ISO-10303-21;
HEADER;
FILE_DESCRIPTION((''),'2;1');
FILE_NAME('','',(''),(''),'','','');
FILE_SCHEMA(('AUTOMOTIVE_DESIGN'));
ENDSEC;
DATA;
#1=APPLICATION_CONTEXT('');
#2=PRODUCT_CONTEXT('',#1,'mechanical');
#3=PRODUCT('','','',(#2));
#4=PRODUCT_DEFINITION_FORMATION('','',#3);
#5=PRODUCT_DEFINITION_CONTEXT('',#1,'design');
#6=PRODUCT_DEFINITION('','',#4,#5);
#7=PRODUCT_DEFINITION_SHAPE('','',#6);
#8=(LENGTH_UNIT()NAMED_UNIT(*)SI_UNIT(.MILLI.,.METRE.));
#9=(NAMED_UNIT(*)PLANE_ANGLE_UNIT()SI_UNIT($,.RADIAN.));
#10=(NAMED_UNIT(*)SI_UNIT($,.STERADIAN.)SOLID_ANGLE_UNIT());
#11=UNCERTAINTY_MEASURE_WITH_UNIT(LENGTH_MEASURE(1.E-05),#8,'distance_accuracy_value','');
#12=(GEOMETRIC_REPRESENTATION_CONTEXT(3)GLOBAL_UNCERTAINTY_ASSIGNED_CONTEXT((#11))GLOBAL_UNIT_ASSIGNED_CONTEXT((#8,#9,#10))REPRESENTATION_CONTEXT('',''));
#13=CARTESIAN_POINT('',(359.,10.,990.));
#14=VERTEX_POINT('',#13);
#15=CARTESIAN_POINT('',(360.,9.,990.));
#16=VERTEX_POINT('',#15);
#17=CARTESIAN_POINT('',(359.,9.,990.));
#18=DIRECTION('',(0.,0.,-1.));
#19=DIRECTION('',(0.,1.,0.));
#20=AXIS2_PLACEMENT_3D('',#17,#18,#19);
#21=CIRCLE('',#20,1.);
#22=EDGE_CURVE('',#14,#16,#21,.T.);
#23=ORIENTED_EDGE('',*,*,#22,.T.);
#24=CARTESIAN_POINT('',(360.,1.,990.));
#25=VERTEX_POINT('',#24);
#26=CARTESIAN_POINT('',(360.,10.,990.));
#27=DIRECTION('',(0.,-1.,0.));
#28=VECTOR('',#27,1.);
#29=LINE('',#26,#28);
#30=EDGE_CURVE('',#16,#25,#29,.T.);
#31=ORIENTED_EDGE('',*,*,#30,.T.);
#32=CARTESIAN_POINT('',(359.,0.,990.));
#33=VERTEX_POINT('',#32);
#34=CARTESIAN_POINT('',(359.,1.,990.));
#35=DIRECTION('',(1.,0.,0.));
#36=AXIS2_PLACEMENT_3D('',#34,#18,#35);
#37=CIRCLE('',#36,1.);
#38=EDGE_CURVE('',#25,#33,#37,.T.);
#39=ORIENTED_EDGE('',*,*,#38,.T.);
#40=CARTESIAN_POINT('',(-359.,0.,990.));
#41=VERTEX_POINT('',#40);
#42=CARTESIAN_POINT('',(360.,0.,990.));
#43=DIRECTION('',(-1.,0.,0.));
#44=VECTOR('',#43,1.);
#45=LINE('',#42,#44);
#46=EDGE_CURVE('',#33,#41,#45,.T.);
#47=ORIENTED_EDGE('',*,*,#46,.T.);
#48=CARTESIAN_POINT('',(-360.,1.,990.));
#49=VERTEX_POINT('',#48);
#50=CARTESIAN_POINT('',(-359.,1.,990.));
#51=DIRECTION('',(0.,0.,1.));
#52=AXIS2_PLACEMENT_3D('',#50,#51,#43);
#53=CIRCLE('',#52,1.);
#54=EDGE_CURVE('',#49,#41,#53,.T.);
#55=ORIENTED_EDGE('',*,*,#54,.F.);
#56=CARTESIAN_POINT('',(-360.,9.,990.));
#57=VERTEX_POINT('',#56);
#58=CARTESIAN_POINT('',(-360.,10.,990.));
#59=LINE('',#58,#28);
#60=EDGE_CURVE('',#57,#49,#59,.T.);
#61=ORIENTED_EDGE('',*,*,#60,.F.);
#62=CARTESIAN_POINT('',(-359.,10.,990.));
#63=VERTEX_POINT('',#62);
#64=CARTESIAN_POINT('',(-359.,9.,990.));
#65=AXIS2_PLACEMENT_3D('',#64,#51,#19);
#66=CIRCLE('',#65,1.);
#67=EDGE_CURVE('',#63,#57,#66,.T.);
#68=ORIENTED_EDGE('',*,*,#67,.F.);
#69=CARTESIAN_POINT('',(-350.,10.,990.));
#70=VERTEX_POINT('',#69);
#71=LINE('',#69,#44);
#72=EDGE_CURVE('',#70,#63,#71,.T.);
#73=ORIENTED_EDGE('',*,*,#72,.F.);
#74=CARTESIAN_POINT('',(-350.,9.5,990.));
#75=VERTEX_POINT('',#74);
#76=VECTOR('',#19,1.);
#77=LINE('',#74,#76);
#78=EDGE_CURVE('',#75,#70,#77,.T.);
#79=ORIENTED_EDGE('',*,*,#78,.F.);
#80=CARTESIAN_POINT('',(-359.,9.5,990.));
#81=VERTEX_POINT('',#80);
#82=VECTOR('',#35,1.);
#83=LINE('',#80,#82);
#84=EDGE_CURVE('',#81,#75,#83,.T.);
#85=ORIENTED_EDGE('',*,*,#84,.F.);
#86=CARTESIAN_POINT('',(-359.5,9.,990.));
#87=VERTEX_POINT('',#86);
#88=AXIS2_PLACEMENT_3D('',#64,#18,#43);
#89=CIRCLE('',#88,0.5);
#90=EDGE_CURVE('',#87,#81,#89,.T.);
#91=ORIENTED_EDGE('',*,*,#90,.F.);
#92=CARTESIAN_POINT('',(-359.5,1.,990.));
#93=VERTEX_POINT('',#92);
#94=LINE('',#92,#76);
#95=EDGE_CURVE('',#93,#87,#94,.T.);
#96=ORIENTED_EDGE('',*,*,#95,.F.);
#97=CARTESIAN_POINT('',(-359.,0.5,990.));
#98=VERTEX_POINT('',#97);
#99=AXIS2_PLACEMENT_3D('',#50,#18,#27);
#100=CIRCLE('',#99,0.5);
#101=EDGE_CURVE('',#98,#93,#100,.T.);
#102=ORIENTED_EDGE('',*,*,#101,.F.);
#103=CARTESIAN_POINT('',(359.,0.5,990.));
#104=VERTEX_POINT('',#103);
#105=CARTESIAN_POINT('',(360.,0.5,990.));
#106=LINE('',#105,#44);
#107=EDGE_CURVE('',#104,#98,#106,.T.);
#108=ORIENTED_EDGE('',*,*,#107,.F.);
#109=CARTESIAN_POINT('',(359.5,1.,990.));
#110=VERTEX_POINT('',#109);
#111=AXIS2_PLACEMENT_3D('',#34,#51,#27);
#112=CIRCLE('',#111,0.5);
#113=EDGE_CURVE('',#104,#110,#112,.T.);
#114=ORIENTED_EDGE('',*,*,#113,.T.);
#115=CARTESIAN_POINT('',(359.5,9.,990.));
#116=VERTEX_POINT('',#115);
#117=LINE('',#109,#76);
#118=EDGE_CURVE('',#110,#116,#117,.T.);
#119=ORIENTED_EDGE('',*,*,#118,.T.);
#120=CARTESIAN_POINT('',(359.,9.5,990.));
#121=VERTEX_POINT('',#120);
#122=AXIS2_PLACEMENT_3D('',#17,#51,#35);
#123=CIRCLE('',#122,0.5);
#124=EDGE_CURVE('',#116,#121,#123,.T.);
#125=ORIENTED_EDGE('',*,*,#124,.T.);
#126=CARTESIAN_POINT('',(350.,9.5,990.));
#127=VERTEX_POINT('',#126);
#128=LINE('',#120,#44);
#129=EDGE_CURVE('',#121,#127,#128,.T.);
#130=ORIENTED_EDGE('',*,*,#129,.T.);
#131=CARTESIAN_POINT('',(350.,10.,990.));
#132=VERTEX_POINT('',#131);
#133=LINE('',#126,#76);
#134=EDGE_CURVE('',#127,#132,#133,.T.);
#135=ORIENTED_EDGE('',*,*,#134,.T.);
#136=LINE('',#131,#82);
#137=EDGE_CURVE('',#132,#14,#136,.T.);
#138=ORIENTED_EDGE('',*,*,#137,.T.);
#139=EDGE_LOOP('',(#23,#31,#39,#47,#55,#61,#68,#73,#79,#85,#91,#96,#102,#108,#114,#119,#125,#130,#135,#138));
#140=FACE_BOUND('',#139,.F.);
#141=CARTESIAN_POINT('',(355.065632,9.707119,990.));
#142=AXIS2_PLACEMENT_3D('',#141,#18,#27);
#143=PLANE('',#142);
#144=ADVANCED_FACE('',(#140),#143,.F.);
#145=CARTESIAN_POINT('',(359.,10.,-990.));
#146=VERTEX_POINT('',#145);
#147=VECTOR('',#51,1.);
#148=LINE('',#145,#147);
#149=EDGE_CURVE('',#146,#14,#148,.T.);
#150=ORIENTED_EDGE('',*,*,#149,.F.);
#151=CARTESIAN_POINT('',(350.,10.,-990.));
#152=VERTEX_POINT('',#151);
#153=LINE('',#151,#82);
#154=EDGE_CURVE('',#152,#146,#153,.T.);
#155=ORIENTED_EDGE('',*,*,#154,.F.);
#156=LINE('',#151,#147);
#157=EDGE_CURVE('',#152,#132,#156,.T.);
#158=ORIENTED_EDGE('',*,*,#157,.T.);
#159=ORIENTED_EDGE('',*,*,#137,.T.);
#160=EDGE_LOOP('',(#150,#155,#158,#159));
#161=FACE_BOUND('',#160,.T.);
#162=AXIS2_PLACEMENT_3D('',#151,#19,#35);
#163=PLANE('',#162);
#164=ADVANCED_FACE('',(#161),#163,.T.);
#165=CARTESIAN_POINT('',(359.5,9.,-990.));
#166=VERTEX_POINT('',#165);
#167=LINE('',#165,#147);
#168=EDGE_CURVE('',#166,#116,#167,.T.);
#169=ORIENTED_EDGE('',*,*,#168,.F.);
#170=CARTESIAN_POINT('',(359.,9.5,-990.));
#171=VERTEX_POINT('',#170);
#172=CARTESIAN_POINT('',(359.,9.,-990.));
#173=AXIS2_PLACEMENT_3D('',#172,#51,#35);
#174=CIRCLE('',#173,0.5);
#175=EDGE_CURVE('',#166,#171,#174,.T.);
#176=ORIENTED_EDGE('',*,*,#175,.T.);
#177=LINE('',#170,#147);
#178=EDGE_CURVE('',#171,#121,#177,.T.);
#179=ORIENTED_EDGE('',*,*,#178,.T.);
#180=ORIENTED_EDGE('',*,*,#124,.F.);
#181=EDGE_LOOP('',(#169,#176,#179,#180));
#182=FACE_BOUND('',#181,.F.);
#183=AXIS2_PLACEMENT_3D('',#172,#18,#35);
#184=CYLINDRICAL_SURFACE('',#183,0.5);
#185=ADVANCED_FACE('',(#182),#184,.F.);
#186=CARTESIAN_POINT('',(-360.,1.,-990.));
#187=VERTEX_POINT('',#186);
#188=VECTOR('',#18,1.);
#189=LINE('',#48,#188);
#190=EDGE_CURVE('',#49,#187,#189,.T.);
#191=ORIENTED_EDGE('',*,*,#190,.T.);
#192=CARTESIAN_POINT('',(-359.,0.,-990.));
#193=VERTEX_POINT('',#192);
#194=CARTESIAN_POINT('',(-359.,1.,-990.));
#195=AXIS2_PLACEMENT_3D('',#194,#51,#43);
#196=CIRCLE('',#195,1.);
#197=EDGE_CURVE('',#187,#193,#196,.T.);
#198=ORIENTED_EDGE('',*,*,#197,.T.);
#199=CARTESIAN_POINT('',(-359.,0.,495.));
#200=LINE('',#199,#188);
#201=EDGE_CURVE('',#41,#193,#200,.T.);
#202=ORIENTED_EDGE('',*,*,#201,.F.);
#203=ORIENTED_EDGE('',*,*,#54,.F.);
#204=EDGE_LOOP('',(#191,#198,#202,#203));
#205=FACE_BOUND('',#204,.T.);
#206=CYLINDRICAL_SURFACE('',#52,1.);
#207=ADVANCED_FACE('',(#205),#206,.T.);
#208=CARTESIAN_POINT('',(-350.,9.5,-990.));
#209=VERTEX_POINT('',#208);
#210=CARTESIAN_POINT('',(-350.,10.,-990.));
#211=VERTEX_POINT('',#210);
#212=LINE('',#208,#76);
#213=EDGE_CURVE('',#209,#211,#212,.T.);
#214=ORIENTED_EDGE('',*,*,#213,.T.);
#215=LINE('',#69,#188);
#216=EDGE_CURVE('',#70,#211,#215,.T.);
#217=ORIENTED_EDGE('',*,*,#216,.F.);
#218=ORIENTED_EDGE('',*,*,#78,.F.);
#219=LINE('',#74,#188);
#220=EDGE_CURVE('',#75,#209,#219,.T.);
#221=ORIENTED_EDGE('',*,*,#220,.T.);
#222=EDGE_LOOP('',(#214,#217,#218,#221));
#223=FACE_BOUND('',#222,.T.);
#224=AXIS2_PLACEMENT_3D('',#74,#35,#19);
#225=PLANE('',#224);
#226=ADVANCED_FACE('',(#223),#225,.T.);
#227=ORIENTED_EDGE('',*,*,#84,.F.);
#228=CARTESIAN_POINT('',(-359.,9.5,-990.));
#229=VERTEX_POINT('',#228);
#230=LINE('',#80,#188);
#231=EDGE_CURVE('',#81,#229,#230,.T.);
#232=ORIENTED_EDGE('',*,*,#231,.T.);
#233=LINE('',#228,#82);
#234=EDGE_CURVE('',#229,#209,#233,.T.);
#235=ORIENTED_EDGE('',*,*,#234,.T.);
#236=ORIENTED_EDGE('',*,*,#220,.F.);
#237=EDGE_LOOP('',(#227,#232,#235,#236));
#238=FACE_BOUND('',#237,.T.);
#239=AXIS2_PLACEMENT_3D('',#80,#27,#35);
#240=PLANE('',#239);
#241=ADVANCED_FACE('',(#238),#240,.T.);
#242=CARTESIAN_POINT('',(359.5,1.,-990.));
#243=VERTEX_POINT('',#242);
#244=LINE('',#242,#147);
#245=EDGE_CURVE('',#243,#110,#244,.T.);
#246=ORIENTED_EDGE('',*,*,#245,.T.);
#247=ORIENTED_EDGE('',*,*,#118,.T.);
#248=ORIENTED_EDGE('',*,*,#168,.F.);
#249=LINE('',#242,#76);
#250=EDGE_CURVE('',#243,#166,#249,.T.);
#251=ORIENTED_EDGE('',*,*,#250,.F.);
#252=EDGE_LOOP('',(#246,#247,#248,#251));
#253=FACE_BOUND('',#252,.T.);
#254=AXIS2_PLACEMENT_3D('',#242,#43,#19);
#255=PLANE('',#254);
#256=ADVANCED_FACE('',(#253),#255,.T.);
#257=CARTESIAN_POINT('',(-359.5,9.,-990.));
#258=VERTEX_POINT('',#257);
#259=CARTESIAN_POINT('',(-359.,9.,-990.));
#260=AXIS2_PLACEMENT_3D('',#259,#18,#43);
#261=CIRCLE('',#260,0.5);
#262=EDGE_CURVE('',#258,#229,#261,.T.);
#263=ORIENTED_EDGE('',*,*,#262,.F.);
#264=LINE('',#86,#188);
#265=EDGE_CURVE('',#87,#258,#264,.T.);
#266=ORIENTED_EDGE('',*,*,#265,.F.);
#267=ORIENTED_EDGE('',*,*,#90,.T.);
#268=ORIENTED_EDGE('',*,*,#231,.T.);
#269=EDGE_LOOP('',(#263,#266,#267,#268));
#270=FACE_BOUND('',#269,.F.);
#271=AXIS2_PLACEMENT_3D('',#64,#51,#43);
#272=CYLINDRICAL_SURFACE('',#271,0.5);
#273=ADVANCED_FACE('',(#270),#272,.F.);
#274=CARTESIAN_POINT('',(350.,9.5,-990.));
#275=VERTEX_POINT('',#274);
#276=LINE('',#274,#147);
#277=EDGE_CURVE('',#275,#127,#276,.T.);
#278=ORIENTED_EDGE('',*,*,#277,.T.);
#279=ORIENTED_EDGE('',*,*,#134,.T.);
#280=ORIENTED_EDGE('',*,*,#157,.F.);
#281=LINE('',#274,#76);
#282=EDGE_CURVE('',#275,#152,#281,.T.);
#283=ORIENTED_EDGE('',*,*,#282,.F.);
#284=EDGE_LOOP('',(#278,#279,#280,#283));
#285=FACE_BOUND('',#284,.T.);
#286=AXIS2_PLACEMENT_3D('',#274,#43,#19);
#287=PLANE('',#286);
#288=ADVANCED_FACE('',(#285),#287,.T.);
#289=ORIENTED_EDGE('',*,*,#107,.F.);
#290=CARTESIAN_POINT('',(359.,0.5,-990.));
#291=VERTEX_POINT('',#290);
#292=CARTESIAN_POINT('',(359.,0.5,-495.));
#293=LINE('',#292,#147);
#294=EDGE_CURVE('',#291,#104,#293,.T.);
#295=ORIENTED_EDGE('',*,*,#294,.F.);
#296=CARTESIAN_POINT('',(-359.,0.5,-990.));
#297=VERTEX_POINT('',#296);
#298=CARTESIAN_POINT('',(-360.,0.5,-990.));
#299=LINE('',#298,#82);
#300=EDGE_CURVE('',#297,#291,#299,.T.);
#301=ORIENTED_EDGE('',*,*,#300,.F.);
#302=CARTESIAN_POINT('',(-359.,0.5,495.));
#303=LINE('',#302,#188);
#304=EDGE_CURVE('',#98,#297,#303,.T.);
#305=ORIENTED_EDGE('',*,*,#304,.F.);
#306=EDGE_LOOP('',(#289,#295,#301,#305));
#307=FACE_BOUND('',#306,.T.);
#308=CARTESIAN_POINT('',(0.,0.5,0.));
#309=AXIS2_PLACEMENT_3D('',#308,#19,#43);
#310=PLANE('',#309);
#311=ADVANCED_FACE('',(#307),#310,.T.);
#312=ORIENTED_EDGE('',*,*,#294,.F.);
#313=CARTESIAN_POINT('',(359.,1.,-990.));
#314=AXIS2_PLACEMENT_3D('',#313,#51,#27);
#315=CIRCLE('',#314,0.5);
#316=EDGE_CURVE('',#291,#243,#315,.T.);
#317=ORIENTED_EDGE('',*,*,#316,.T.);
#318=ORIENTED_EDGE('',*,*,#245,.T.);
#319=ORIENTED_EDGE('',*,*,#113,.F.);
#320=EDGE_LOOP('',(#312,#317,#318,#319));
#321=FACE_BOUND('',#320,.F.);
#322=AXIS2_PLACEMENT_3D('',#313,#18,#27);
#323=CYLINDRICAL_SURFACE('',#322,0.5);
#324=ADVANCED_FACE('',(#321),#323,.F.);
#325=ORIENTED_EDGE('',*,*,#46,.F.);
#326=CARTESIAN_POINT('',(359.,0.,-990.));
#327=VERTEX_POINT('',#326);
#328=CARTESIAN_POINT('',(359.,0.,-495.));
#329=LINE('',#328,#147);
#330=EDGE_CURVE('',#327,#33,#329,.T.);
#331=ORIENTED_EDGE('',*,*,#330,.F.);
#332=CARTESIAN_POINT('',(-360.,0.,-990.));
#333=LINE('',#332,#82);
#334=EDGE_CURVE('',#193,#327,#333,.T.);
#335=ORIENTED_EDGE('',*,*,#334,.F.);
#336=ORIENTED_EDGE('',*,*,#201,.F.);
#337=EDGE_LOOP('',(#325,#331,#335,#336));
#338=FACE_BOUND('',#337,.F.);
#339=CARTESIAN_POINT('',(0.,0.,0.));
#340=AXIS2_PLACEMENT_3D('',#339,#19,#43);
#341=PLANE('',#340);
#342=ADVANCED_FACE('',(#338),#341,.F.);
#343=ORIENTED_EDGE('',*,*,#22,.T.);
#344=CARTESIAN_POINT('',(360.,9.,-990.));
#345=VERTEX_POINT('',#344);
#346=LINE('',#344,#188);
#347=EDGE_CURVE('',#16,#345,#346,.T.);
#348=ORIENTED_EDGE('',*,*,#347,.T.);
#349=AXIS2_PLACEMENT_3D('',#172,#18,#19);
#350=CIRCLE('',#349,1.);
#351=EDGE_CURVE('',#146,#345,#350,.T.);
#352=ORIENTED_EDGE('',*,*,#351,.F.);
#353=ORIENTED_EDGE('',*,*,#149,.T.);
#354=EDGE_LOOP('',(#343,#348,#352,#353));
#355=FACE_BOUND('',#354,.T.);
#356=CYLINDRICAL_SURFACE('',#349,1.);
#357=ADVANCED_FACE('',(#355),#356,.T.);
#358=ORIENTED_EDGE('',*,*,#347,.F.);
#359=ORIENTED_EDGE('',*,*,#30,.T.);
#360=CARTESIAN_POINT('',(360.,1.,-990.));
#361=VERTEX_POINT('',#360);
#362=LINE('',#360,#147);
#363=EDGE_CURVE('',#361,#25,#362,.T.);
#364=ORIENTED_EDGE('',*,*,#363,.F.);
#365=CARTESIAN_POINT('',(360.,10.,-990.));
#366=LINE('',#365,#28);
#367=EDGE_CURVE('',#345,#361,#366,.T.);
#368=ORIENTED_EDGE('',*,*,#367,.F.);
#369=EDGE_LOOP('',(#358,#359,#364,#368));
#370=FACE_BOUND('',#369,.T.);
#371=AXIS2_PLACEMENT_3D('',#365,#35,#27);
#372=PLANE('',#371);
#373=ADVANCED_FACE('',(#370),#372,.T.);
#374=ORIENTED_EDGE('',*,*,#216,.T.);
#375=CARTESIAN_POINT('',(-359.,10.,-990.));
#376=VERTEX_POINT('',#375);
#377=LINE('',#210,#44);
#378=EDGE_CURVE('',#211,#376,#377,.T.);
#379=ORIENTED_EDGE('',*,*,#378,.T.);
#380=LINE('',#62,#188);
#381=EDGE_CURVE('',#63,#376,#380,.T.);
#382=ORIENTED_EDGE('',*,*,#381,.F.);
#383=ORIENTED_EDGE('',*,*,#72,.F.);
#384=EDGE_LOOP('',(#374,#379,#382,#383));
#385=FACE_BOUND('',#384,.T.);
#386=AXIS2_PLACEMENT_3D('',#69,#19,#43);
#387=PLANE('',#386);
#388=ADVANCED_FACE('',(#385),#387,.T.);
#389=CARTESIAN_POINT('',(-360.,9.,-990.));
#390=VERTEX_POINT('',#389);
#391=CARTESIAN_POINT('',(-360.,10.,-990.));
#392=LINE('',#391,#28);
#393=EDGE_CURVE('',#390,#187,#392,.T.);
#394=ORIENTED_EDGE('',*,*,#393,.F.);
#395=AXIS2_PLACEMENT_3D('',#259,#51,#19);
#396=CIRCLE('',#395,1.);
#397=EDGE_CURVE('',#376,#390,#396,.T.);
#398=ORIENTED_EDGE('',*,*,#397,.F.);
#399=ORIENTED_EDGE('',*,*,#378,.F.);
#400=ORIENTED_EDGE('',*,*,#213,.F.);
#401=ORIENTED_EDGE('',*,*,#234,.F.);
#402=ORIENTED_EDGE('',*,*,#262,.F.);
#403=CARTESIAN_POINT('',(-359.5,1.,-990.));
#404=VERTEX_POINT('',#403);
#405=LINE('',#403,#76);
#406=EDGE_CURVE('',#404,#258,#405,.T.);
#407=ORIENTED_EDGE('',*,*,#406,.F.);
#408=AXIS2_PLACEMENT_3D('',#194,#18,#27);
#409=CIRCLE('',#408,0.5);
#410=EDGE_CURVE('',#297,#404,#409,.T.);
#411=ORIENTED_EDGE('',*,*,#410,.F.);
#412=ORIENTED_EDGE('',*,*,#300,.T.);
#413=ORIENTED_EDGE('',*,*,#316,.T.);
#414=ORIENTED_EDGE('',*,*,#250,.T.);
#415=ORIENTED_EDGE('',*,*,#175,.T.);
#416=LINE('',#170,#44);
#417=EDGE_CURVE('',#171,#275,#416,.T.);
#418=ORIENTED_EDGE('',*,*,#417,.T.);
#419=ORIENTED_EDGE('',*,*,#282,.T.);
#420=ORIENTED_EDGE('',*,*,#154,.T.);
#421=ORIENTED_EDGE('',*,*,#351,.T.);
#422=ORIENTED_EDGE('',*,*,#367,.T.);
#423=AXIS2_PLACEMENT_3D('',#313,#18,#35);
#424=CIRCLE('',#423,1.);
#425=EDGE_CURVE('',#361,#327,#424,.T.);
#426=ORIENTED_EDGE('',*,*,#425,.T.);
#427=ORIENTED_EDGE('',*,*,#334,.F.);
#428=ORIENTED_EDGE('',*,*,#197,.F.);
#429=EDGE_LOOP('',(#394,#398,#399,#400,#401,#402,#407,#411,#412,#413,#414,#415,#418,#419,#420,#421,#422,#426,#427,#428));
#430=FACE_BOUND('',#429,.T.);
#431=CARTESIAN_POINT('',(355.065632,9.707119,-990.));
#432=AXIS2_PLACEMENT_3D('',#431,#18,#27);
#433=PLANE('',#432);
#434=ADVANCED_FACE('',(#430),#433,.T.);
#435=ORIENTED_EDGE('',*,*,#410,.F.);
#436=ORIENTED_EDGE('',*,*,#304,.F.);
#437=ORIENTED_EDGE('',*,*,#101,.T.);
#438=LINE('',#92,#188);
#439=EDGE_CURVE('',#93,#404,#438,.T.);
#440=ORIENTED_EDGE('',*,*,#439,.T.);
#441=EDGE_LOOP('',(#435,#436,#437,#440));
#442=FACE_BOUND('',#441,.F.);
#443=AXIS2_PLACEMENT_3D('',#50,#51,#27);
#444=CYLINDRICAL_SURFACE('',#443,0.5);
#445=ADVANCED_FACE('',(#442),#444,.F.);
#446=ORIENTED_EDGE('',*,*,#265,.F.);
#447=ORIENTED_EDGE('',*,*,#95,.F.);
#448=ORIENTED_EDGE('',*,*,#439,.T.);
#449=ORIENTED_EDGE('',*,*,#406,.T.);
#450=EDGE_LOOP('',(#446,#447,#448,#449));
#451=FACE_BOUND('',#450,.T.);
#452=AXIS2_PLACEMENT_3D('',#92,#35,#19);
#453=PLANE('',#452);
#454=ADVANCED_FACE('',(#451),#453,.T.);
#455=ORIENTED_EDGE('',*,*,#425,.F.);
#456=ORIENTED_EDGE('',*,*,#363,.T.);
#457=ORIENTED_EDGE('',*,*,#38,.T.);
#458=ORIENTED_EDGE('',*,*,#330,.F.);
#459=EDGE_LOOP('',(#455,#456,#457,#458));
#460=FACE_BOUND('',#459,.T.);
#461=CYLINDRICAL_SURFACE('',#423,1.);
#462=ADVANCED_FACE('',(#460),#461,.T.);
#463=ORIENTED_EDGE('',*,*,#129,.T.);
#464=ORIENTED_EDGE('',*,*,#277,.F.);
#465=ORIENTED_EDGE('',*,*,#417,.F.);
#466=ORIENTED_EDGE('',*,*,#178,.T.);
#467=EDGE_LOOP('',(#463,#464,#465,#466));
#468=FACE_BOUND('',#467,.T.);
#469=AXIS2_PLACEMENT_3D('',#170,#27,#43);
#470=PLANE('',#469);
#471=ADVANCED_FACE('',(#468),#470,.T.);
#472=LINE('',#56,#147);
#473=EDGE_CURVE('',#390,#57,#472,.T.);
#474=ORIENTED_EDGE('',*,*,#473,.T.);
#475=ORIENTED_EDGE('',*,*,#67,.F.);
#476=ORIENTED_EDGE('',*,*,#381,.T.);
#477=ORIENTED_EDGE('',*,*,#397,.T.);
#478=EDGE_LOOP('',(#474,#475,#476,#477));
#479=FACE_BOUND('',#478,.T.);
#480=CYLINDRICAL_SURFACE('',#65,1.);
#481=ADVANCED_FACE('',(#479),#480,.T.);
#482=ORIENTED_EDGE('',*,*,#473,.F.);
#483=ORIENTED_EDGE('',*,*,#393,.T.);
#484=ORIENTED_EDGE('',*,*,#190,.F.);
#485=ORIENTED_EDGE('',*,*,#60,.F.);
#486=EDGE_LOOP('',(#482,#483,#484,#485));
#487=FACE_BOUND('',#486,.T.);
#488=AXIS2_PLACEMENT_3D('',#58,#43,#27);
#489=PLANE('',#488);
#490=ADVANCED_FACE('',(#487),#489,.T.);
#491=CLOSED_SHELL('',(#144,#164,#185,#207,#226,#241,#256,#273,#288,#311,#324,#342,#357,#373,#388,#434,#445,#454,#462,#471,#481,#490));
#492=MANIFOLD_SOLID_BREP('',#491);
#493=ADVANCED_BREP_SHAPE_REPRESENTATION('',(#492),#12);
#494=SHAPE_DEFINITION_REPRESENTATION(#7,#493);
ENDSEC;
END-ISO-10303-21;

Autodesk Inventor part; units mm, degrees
ref_plane "YZ Plane" through (0, 0, 0) normal (1, 0, 0) x (0, 1, 0)
ref_plane "XZ Plane" through (0, 0, 0) normal (0, 1, 0) x (-1, 0, 0)
ref_plane "XY Plane" through (0, 0, 0) normal (0, 0, 1) x (1, 0, 0)
sketch "Sketch6" plane through (0, 0, 0) normal (0, 1, 0) x (-1, 0, 0)
  line L0 (360, -990) -> (-360, -990)
  line L1 (-360, -990) -> (-360, 990)
  line L2 (-360, 990) -> (360, 990)
  line L3 (360, 990) -> (360, -990)
  line L4 (360, -990) -> (-360, 990) construction
  line L5 (-360, -990) -> (360, 990) construction
  point P0 (0, 0)
  dimension "d52" = 720
  dimension "d53" = 1980
extrude "Plate2" add sketch "Sketch6" along normal blind 0.5
sketch "Sketch11" plane through (-359.5, 0, 990) normal (-1, 0, 0) x (0, -1, 0)
  line L0 (0, -1980) -> (0, 0)
  line L1 (0, 0) -> (-10, 0)
  line L2 (-10, 0) -> (-10, -1980)
  line L3 (-10, -1980) -> (0, -1980)
edge flange "Flange2" height 10 angle 90 thickness 0.5 bend radius 0.5 thickness toward (-1, 0, 0) relief tear relief width 0.5 relief depth 0.25 edges at (-360, 0.5, 0) wall of the first edge with corners at (-359.5, 0, -990) (-359.5, 0, 990) (-359.5, 10, 990) (-359.5, 10, -990)
bend "Bend3"
corner "Corner3"
sketch "Sketch12" plane through (-360, 9.5, 990) normal (0, 1, 0) x (-1, 0, 0)
  line L0 (0, -1980) -> (0, 0)
  line L1 (0, 0) -> (-10, 0)
  line L2 (-10, 0) -> (-10, -1980)
  line L3 (-10, -1980) -> (0, -1980)
edge flange "Flange3" height 10 angle 90 thickness 0.5 bend radius 0.5 thickness toward (0, 1, 0) relief tear relief width 0.5 relief depth 0.25 edges at (-359.5, 10, 0) wall of the first edge with corners at (-360, 9.5, -990) (-360, 9.5, 990) (-350, 9.5, 990) (-350, 9.5, -990)
bend "Bend4"
corner "Corner4"
sketch "Sketch13" plane through (359.5, 0, -990) normal (1, 0, 0) x (0, 1, 0)
  line L0 (0, 1980) -> (0, 0)
  line L1 (0, 0) -> (10, 0)
  line L2 (10, 0) -> (10, 1980)
  line L3 (10, 1980) -> (0, 1980)
edge flange "Flange4" height 10 angle 90 thickness 0.5 bend radius 0.5 thickness toward (1, 0, 0) relief tear relief width 0.5 relief depth 0.25 edges at (360, 0.5, 0) wall of the first edge with corners at (359.5, 0, 990) (359.5, 0, -990) (359.5, 10, -990) (359.5, 10, 990)
bend "Bend5"
corner "Corner5"
sketch "Sketch14" plane through (360, 9.5, -990) normal (0, 1, 0) x (-1, 0, 0)
  line L0 (0, 1980) -> (0, 0)
  line L1 (0, 0) -> (10, 0)
  line L2 (10, 0) -> (10, 1980)
  line L3 (10, 1980) -> (0, 1980)
edge flange "Flange5" height 10 angle 90 thickness 0.5 bend radius 0.5 thickness toward (0, 1, 0) relief tear relief width 0.5 relief depth 0.25 edges at (359.5, 10, 0) wall of the first edge with corners at (360, 9.5, 990) (360, 9.5, -990) (350, 9.5, -990) (350, 9.5, 990)
bend "Bend6"
corner "Corner6"
equation "\"d53\" = ЖАБРЫ_базовая_длина_дл_лист"
equation "\"d54\" = Thickness"
equation "\"d84\" = BendReliefWidth"
equation "\"d85\" = BendReliefDepth"
equation "\"d86\" = MinimumRemnant"
equation "\"d87\" = TransitionRadius"
equation "\"d90\" = BendRadius"
equation "\"d91\" = CornerReliefSize"
equation "\"d92\" = GapSize"
equation "\"d93\" = JacobiRadiusSize"
equation "\"d94\" = BendReliefWidth"
equation "\"d95\" = BendReliefDepth"
equation "\"d96\" = MinimumRemnant"
equation "\"d97\" = TransitionRadius"
equation "\"d100\" = BendRadius"
equation "\"d101\" = CornerReliefSize"
equation "\"d102\" = GapSize"
equation "\"d103\" = JacobiRadiusSize"
equation "\"d104\" = BendReliefWidth"
equation "\"d105\" = BendReliefDepth"
equation "\"d106\" = MinimumRemnant"
equation "\"d107\" = TransitionRadius"
equation "\"d110\" = BendRadius"
equation "\"d111\" = CornerReliefSize"
equation "\"d112\" = GapSize"
equation "\"d113\" = JacobiRadiusSize"
equation "\"d114\" = BendReliefWidth"
equation "\"d115\" = BendReliefDepth"
equation "\"d116\" = MinimumRemnant"
equation "\"d117\" = TransitionRadius"
equation "\"d120\" = BendRadius"
equation "\"d121\" = CornerReliefSize"
equation "\"d122\" = GapSize"
equation "\"d123\" = JacobiRadiusSize"
equation "\"BendRadius\" = Thickness"
equation "\"BendReliefWidth\" = Thickness"
equation "\"BendReliefDepth\" = 0.5 * Thickness"
equation "\"CornerReliefSize\" = 4 * Thickness"
equation "\"MinimumRemnant\" = 2 * Thickness"
equation "\"TransitionRadius\" = BendRadius"
equation "\"JacobiRadiusSize\" = BendRadius"
equation "\"GapSize\" = Thickness"
equation "\"ЖАБРЫ_базовая_длина_дл_лист\" = 1980"
equation "\"Thickness\" = 0.5"
properties part number "MSC 806 sheet gills" material "Stainless Steel"
